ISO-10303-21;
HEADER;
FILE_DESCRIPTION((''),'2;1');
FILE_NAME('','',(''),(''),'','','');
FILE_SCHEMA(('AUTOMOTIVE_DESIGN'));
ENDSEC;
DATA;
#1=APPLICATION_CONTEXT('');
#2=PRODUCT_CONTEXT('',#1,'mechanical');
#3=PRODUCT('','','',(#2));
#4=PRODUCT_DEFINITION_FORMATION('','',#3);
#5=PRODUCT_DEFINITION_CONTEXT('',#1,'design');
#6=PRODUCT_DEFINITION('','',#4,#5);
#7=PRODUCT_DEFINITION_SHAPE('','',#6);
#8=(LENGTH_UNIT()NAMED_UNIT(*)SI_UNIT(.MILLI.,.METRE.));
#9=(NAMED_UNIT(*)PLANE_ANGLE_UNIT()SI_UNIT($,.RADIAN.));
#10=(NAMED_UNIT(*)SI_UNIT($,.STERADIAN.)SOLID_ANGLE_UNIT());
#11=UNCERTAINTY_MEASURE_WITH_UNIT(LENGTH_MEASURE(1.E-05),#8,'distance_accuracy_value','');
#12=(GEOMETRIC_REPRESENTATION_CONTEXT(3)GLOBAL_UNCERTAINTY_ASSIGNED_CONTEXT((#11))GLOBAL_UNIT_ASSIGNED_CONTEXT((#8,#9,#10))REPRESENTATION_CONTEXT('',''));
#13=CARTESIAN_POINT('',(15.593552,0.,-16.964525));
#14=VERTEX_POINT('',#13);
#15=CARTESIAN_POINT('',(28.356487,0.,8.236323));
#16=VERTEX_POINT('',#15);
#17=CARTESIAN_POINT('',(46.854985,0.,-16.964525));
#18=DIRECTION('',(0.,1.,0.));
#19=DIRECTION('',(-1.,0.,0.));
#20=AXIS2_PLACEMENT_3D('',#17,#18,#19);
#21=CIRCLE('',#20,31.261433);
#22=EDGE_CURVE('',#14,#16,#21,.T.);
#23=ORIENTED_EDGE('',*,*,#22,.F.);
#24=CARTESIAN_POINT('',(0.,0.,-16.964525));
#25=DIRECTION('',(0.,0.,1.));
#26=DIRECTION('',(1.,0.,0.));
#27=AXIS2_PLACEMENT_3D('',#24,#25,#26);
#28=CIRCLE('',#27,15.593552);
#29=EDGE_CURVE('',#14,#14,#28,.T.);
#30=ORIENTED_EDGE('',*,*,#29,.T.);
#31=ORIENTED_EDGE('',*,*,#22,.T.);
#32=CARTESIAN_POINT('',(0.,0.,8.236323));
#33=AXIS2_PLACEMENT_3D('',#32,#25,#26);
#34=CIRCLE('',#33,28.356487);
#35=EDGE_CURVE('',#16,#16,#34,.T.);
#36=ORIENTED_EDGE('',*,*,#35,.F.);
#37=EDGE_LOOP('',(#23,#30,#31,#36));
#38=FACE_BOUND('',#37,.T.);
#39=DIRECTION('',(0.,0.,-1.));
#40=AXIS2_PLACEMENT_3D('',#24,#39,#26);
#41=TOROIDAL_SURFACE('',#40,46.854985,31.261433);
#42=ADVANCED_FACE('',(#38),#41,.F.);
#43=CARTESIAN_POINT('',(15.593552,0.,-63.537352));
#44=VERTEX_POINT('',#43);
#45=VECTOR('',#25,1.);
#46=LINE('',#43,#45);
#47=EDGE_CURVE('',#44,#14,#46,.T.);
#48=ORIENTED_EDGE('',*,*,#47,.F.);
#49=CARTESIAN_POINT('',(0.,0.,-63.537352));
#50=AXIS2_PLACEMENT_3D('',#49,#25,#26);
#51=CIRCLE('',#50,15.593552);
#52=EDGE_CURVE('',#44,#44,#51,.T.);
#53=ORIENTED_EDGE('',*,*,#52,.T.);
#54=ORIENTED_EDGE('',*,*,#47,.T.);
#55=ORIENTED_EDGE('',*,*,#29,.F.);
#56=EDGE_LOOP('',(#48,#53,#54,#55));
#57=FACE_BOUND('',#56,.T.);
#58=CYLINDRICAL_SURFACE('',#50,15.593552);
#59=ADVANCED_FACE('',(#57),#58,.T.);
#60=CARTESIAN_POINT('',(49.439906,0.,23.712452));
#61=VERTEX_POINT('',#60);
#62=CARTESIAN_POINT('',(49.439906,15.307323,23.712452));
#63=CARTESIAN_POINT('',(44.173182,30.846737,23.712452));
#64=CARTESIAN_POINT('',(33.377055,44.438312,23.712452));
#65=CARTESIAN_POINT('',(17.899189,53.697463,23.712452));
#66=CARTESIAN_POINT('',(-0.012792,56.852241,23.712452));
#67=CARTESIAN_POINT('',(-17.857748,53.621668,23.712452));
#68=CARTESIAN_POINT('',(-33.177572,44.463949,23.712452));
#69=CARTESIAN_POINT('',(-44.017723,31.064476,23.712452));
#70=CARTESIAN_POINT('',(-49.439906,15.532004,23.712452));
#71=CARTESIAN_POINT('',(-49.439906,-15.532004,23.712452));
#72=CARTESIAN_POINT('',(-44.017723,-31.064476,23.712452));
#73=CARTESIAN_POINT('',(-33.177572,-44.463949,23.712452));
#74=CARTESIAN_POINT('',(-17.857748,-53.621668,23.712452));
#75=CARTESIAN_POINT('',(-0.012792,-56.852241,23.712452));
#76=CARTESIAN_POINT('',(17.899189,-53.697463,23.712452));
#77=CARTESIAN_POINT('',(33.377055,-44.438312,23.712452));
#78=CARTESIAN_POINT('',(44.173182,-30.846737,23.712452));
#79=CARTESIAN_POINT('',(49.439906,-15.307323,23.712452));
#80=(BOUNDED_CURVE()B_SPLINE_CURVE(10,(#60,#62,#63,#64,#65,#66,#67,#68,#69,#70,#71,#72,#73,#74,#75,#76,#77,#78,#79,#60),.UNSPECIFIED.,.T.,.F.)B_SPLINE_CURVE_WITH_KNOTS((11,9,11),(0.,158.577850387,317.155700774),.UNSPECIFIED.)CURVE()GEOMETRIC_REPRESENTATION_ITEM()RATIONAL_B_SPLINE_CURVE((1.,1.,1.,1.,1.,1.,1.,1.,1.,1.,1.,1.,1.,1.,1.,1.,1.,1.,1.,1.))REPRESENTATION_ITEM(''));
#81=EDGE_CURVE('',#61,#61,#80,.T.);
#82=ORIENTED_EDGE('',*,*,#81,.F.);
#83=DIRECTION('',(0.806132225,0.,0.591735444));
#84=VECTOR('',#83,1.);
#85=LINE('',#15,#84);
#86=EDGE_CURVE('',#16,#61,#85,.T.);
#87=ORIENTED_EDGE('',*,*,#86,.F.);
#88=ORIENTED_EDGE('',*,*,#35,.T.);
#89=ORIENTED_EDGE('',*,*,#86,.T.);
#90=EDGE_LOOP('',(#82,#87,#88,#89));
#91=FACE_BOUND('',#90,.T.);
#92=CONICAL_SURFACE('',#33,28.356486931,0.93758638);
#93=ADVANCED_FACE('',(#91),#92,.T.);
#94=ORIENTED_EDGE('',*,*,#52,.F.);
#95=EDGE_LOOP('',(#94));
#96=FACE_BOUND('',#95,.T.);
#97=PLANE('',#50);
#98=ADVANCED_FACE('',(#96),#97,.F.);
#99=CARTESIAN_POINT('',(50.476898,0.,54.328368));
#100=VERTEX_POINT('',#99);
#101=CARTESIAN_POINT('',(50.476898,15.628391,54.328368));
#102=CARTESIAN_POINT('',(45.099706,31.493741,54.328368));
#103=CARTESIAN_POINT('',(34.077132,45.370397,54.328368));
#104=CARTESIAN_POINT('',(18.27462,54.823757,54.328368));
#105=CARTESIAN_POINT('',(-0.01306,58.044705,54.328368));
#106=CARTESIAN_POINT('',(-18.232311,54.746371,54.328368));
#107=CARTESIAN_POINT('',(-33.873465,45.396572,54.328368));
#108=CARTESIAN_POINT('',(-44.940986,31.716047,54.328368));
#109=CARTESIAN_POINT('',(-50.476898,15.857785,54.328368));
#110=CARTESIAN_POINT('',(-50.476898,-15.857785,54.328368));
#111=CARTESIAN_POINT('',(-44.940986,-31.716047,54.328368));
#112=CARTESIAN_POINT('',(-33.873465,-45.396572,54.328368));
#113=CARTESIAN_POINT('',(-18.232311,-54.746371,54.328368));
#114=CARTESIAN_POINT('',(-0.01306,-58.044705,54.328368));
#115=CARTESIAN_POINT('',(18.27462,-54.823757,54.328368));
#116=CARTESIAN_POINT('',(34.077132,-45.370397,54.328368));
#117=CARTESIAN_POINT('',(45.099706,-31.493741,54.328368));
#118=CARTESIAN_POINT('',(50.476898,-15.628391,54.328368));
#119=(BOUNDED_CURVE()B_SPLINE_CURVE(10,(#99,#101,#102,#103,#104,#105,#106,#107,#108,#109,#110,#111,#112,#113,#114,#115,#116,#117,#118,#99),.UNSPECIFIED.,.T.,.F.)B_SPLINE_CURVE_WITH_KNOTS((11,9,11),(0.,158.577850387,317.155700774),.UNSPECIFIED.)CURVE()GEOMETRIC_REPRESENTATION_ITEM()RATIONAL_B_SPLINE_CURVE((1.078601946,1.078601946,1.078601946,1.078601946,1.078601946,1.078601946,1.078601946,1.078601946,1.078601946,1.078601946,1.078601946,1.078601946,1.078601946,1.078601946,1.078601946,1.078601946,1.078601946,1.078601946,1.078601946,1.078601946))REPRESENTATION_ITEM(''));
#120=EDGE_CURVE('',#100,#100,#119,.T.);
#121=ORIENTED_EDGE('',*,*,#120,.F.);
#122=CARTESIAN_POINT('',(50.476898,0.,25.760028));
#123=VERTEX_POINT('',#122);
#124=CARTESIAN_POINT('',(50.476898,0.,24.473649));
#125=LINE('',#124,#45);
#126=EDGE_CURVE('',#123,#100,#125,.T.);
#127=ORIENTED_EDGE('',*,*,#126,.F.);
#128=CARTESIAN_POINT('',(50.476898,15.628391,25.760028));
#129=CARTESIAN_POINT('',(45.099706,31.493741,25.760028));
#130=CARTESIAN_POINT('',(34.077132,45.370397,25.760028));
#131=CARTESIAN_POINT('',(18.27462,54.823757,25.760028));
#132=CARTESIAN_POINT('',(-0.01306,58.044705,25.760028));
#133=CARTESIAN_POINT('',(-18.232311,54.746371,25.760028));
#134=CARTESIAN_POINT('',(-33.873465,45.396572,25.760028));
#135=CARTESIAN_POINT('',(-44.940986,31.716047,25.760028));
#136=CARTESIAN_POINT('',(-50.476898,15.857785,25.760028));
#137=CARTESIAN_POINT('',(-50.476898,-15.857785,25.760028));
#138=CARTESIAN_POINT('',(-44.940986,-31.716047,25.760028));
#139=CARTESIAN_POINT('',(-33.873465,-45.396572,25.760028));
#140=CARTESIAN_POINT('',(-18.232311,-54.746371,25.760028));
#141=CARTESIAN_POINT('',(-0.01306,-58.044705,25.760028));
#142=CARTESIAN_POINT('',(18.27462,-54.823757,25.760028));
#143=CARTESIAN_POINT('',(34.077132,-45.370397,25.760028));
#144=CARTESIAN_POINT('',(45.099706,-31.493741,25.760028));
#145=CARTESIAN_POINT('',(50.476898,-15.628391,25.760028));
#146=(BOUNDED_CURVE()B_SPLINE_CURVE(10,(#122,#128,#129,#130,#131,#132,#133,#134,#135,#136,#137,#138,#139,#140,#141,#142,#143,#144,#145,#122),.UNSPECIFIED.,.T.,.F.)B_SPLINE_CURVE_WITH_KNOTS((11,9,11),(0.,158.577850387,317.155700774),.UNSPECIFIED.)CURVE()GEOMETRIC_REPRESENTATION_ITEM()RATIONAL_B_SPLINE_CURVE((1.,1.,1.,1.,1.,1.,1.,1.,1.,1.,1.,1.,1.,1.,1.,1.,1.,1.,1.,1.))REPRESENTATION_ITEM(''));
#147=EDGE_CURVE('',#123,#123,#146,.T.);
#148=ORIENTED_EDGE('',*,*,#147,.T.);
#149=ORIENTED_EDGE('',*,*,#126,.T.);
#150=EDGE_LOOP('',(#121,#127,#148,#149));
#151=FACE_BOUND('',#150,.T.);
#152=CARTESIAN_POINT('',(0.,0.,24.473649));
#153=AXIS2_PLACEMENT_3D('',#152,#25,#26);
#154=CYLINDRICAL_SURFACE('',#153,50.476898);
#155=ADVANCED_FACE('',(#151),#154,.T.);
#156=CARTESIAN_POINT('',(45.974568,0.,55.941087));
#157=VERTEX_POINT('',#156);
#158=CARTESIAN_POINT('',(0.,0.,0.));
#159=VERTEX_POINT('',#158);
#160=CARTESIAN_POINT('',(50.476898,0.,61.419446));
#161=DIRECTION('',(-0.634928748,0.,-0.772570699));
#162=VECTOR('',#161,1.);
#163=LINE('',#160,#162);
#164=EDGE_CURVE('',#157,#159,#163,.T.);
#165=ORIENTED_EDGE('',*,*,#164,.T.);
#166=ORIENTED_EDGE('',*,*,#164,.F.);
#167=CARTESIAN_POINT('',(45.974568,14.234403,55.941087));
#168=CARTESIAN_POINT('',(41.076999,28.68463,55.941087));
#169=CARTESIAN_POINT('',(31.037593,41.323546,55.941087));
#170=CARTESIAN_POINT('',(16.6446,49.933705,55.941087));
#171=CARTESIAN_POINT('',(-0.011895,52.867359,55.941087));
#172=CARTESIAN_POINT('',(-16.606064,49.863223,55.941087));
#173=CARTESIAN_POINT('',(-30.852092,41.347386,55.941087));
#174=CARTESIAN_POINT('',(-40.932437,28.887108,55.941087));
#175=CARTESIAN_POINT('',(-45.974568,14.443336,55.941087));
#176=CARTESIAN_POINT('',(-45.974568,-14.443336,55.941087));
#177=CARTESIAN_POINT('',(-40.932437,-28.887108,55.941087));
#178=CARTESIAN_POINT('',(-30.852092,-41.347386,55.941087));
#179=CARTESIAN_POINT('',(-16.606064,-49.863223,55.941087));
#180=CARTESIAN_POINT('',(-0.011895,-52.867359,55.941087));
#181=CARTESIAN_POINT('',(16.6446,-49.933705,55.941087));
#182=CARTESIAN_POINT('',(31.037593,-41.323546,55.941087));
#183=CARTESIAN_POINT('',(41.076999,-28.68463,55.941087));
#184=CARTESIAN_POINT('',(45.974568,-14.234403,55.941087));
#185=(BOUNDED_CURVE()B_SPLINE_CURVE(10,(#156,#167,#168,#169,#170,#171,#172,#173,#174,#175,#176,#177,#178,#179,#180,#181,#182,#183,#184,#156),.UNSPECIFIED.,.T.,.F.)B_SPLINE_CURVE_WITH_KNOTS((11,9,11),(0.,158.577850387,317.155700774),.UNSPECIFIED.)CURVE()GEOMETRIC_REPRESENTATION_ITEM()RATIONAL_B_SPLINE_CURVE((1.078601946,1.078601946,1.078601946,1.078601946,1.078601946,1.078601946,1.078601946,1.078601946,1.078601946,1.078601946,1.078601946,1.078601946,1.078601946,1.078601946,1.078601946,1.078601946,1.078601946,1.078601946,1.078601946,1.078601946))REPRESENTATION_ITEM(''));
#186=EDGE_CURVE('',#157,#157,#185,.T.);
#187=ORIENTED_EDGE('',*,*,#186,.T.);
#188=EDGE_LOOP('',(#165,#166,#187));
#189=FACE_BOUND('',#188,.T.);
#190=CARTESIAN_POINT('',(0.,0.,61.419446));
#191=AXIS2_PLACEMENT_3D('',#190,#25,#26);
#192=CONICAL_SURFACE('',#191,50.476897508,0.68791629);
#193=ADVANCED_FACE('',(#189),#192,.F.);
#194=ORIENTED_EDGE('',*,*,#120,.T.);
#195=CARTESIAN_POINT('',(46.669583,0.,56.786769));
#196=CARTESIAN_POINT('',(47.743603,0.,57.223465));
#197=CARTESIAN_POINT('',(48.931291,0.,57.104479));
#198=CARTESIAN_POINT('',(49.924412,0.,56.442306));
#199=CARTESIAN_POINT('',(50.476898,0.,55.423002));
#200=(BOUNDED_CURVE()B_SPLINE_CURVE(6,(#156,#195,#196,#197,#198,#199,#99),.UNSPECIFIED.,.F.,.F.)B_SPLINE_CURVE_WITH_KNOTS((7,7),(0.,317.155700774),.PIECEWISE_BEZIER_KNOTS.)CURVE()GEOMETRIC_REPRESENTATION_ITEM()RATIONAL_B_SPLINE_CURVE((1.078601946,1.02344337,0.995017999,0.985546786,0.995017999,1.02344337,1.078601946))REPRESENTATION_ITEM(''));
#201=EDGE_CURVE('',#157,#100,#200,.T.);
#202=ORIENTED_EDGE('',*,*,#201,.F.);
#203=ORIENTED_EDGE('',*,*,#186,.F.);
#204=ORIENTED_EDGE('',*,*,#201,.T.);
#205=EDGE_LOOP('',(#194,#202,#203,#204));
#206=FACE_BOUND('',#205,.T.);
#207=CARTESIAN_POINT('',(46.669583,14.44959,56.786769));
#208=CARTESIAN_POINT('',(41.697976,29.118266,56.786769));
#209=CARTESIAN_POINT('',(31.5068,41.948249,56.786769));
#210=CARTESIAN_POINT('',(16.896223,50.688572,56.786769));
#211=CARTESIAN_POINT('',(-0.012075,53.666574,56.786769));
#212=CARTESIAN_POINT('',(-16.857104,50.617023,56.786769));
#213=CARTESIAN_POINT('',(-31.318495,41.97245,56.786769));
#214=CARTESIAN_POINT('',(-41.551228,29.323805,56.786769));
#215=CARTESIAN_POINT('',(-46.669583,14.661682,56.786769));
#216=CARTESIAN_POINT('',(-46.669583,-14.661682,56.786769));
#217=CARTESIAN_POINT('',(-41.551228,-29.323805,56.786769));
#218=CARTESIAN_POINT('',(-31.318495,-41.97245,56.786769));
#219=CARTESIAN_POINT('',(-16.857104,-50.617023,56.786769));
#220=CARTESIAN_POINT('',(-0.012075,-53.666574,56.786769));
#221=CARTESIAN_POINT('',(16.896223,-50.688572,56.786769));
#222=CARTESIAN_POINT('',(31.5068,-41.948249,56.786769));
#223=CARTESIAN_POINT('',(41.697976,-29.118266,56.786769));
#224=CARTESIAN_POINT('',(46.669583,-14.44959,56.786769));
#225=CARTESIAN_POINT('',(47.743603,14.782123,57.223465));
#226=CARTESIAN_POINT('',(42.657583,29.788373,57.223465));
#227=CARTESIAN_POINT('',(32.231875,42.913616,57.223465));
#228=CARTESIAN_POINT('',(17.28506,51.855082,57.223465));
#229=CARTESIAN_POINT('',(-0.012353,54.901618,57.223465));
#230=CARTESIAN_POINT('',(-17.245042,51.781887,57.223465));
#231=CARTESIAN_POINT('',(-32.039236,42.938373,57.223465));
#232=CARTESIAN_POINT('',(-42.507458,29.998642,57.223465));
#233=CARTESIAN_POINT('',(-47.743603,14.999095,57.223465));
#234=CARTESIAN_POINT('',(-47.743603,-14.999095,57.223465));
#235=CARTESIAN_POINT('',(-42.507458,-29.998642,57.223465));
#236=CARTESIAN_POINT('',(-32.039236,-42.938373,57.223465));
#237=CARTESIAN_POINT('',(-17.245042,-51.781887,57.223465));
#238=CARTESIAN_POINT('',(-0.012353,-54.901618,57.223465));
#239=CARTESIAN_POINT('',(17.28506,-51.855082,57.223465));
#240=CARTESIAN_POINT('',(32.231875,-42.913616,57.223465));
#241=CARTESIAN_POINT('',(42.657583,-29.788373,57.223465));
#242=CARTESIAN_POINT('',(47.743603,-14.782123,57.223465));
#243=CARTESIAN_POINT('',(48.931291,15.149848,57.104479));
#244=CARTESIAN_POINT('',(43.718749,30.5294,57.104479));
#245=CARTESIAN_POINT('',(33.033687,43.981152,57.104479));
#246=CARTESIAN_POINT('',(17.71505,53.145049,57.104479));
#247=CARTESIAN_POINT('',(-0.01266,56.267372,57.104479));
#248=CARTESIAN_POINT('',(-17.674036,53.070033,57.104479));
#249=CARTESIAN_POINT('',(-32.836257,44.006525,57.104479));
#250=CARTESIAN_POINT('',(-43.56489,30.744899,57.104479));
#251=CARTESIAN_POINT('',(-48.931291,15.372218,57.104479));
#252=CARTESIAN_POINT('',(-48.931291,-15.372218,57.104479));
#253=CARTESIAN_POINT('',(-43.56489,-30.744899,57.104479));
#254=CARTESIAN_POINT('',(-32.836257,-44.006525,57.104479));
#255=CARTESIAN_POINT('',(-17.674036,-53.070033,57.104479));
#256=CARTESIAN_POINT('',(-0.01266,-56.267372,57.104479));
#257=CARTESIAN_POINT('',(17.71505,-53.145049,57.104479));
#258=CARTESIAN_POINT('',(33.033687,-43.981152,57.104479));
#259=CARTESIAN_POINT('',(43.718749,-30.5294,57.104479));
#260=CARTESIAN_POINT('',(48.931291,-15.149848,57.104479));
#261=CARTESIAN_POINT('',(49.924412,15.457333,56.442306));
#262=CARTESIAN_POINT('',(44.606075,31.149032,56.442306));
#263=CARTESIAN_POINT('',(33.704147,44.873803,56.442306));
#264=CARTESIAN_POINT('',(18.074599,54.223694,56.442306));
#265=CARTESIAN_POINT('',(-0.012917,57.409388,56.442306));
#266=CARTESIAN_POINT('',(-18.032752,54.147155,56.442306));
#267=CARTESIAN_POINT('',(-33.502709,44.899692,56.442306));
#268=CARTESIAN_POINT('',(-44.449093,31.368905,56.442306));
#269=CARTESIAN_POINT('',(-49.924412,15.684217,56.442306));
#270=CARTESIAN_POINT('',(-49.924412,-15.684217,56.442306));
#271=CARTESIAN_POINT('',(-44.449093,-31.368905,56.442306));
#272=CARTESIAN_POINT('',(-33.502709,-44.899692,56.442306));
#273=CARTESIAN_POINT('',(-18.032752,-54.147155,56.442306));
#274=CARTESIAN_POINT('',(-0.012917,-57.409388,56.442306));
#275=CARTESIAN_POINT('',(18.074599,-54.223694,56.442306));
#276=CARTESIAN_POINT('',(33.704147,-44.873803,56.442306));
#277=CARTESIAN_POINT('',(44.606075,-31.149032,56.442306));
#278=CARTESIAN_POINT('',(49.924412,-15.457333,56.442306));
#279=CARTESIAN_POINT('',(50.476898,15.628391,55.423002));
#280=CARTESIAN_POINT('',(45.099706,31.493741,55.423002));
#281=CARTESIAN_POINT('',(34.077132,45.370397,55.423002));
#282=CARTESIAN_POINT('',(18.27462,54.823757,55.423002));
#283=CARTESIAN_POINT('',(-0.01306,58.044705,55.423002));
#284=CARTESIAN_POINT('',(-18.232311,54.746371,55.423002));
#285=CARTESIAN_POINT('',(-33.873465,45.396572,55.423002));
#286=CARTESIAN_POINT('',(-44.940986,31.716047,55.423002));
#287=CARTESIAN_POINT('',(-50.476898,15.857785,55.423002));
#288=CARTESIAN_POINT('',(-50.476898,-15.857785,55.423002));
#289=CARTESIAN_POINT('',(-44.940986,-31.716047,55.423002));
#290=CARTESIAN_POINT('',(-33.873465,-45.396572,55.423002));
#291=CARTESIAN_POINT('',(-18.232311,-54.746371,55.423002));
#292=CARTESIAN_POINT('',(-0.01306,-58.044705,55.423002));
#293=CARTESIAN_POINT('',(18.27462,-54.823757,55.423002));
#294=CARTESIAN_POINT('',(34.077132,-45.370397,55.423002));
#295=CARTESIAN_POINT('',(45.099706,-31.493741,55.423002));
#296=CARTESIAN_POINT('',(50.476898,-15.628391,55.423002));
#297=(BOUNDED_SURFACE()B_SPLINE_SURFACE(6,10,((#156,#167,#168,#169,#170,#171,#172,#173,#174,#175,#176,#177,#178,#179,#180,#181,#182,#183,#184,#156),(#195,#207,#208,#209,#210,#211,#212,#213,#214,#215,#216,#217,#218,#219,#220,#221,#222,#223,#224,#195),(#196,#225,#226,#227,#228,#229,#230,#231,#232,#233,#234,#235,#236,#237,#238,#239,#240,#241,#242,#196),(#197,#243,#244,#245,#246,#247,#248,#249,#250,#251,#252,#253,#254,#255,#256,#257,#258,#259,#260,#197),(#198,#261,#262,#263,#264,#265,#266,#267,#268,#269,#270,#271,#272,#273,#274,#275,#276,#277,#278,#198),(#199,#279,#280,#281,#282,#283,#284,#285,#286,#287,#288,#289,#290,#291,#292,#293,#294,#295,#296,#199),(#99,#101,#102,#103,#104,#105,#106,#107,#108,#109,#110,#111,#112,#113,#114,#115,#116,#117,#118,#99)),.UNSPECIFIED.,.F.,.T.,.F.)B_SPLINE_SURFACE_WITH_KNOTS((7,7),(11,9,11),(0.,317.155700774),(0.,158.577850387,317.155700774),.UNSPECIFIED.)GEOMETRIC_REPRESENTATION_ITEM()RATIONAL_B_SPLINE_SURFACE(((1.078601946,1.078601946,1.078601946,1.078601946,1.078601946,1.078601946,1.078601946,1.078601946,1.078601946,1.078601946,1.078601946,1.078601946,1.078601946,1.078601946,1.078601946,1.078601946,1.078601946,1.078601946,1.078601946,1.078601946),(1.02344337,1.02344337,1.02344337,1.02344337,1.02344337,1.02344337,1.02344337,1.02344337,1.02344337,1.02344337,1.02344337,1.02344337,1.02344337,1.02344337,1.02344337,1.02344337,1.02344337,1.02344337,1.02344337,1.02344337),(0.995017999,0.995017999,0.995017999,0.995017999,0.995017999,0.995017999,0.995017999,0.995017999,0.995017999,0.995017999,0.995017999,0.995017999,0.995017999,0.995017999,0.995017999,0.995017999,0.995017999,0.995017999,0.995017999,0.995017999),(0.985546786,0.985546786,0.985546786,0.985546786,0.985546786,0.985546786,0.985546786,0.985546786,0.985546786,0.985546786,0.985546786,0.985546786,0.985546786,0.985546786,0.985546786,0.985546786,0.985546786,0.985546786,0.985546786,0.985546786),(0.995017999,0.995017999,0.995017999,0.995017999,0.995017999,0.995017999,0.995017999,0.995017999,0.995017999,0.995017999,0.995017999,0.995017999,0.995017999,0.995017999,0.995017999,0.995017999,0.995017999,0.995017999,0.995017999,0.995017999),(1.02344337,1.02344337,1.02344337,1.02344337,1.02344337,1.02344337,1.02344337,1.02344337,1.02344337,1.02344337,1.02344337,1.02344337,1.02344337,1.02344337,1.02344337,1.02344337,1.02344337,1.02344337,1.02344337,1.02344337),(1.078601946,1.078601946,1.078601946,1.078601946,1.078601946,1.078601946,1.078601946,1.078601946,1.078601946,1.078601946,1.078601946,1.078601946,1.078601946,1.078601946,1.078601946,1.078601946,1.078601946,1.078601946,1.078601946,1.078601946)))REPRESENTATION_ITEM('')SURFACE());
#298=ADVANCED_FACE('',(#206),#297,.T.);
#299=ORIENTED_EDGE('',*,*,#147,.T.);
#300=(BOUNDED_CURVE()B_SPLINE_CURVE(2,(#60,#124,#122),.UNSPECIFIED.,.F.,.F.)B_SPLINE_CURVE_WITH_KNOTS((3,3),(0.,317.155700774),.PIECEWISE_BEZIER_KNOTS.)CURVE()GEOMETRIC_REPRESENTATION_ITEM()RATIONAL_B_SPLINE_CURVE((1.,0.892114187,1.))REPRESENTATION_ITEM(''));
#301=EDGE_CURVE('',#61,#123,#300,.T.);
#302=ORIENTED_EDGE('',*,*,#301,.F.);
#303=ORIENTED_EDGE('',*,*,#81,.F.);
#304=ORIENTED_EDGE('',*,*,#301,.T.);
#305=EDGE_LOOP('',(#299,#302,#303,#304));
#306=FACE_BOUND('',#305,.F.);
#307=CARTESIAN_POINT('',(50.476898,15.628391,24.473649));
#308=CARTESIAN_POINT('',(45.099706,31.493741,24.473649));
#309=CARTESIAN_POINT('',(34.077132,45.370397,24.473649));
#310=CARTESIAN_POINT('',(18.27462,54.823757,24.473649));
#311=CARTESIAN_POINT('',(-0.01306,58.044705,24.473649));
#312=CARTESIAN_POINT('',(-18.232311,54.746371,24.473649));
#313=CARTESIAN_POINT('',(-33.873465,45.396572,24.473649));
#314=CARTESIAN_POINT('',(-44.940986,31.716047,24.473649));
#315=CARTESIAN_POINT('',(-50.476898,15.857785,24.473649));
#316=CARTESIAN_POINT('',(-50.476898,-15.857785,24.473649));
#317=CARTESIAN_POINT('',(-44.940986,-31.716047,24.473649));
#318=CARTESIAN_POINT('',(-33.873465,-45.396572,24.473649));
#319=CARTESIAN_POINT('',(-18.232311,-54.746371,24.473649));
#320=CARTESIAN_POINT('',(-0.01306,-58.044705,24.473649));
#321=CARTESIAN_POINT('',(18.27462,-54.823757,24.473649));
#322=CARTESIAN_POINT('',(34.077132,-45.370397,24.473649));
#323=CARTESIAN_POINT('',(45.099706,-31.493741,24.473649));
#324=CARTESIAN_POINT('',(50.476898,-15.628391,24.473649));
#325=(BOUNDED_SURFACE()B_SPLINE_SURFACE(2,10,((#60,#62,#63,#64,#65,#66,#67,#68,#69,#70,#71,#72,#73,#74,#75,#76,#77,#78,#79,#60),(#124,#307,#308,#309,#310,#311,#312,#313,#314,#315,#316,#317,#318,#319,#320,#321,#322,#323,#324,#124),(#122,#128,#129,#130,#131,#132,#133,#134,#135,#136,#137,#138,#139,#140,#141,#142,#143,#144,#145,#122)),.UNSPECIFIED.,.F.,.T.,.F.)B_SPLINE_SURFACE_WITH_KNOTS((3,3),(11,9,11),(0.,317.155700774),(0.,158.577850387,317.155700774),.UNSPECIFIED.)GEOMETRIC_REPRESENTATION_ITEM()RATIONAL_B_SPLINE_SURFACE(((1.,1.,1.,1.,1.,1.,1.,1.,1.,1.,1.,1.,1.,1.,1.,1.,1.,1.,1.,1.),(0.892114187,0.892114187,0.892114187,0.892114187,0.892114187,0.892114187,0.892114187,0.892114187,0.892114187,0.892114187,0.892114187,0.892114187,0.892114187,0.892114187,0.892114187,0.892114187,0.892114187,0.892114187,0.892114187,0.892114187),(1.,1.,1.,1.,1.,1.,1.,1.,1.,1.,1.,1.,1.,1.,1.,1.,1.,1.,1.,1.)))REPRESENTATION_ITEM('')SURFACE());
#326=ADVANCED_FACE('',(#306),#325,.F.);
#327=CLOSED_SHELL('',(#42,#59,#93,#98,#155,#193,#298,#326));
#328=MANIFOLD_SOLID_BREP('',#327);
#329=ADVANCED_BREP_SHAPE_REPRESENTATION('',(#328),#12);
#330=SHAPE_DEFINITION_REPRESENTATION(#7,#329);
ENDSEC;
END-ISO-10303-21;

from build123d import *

# Parameters (mm, degrees)
F2_R = 2.54


with BuildPart() as f1:
    # F0 (on Front) → F1 (revolve)
    with BuildSketch(Plane.XZ):
        with BuildLine():
            Line((50.4768975079, 61.4194460213), (0, 0))
            Line((0, 0), (0, -63.5373517871))
            Line((0, -63.5373517871), (15.5935517171, -63.5373517871))
            Line((15.5935517171, -63.5373517871), (15.5935517171, -16.9645253417))
            ThreePointArc((15.5935517171, -16.9645253417), (18.9662168832, -2.8402970726), (28.3564869314, 8.2363234833))
            Line((28.3564869314, 8.2363234833), (50.4768975079, 24.4736485183))
            Line((50.4768975079, 24.4736485183), (50.4768975079, 61.4194460213))
        make_face()
    revolve(axis=Axis((0, 0, 22.0490116626), (0, 0, 1)))

    # F2
    f2_edges = [f1.edges().sort_by_distance(p)[0] for p in [
        (-50.476898, 0, 61.419446),
        (-50.476898, 0, 24.473649),
    ]]
    fillet(f2_edges, radius=F2_R)


solid = f1.part
